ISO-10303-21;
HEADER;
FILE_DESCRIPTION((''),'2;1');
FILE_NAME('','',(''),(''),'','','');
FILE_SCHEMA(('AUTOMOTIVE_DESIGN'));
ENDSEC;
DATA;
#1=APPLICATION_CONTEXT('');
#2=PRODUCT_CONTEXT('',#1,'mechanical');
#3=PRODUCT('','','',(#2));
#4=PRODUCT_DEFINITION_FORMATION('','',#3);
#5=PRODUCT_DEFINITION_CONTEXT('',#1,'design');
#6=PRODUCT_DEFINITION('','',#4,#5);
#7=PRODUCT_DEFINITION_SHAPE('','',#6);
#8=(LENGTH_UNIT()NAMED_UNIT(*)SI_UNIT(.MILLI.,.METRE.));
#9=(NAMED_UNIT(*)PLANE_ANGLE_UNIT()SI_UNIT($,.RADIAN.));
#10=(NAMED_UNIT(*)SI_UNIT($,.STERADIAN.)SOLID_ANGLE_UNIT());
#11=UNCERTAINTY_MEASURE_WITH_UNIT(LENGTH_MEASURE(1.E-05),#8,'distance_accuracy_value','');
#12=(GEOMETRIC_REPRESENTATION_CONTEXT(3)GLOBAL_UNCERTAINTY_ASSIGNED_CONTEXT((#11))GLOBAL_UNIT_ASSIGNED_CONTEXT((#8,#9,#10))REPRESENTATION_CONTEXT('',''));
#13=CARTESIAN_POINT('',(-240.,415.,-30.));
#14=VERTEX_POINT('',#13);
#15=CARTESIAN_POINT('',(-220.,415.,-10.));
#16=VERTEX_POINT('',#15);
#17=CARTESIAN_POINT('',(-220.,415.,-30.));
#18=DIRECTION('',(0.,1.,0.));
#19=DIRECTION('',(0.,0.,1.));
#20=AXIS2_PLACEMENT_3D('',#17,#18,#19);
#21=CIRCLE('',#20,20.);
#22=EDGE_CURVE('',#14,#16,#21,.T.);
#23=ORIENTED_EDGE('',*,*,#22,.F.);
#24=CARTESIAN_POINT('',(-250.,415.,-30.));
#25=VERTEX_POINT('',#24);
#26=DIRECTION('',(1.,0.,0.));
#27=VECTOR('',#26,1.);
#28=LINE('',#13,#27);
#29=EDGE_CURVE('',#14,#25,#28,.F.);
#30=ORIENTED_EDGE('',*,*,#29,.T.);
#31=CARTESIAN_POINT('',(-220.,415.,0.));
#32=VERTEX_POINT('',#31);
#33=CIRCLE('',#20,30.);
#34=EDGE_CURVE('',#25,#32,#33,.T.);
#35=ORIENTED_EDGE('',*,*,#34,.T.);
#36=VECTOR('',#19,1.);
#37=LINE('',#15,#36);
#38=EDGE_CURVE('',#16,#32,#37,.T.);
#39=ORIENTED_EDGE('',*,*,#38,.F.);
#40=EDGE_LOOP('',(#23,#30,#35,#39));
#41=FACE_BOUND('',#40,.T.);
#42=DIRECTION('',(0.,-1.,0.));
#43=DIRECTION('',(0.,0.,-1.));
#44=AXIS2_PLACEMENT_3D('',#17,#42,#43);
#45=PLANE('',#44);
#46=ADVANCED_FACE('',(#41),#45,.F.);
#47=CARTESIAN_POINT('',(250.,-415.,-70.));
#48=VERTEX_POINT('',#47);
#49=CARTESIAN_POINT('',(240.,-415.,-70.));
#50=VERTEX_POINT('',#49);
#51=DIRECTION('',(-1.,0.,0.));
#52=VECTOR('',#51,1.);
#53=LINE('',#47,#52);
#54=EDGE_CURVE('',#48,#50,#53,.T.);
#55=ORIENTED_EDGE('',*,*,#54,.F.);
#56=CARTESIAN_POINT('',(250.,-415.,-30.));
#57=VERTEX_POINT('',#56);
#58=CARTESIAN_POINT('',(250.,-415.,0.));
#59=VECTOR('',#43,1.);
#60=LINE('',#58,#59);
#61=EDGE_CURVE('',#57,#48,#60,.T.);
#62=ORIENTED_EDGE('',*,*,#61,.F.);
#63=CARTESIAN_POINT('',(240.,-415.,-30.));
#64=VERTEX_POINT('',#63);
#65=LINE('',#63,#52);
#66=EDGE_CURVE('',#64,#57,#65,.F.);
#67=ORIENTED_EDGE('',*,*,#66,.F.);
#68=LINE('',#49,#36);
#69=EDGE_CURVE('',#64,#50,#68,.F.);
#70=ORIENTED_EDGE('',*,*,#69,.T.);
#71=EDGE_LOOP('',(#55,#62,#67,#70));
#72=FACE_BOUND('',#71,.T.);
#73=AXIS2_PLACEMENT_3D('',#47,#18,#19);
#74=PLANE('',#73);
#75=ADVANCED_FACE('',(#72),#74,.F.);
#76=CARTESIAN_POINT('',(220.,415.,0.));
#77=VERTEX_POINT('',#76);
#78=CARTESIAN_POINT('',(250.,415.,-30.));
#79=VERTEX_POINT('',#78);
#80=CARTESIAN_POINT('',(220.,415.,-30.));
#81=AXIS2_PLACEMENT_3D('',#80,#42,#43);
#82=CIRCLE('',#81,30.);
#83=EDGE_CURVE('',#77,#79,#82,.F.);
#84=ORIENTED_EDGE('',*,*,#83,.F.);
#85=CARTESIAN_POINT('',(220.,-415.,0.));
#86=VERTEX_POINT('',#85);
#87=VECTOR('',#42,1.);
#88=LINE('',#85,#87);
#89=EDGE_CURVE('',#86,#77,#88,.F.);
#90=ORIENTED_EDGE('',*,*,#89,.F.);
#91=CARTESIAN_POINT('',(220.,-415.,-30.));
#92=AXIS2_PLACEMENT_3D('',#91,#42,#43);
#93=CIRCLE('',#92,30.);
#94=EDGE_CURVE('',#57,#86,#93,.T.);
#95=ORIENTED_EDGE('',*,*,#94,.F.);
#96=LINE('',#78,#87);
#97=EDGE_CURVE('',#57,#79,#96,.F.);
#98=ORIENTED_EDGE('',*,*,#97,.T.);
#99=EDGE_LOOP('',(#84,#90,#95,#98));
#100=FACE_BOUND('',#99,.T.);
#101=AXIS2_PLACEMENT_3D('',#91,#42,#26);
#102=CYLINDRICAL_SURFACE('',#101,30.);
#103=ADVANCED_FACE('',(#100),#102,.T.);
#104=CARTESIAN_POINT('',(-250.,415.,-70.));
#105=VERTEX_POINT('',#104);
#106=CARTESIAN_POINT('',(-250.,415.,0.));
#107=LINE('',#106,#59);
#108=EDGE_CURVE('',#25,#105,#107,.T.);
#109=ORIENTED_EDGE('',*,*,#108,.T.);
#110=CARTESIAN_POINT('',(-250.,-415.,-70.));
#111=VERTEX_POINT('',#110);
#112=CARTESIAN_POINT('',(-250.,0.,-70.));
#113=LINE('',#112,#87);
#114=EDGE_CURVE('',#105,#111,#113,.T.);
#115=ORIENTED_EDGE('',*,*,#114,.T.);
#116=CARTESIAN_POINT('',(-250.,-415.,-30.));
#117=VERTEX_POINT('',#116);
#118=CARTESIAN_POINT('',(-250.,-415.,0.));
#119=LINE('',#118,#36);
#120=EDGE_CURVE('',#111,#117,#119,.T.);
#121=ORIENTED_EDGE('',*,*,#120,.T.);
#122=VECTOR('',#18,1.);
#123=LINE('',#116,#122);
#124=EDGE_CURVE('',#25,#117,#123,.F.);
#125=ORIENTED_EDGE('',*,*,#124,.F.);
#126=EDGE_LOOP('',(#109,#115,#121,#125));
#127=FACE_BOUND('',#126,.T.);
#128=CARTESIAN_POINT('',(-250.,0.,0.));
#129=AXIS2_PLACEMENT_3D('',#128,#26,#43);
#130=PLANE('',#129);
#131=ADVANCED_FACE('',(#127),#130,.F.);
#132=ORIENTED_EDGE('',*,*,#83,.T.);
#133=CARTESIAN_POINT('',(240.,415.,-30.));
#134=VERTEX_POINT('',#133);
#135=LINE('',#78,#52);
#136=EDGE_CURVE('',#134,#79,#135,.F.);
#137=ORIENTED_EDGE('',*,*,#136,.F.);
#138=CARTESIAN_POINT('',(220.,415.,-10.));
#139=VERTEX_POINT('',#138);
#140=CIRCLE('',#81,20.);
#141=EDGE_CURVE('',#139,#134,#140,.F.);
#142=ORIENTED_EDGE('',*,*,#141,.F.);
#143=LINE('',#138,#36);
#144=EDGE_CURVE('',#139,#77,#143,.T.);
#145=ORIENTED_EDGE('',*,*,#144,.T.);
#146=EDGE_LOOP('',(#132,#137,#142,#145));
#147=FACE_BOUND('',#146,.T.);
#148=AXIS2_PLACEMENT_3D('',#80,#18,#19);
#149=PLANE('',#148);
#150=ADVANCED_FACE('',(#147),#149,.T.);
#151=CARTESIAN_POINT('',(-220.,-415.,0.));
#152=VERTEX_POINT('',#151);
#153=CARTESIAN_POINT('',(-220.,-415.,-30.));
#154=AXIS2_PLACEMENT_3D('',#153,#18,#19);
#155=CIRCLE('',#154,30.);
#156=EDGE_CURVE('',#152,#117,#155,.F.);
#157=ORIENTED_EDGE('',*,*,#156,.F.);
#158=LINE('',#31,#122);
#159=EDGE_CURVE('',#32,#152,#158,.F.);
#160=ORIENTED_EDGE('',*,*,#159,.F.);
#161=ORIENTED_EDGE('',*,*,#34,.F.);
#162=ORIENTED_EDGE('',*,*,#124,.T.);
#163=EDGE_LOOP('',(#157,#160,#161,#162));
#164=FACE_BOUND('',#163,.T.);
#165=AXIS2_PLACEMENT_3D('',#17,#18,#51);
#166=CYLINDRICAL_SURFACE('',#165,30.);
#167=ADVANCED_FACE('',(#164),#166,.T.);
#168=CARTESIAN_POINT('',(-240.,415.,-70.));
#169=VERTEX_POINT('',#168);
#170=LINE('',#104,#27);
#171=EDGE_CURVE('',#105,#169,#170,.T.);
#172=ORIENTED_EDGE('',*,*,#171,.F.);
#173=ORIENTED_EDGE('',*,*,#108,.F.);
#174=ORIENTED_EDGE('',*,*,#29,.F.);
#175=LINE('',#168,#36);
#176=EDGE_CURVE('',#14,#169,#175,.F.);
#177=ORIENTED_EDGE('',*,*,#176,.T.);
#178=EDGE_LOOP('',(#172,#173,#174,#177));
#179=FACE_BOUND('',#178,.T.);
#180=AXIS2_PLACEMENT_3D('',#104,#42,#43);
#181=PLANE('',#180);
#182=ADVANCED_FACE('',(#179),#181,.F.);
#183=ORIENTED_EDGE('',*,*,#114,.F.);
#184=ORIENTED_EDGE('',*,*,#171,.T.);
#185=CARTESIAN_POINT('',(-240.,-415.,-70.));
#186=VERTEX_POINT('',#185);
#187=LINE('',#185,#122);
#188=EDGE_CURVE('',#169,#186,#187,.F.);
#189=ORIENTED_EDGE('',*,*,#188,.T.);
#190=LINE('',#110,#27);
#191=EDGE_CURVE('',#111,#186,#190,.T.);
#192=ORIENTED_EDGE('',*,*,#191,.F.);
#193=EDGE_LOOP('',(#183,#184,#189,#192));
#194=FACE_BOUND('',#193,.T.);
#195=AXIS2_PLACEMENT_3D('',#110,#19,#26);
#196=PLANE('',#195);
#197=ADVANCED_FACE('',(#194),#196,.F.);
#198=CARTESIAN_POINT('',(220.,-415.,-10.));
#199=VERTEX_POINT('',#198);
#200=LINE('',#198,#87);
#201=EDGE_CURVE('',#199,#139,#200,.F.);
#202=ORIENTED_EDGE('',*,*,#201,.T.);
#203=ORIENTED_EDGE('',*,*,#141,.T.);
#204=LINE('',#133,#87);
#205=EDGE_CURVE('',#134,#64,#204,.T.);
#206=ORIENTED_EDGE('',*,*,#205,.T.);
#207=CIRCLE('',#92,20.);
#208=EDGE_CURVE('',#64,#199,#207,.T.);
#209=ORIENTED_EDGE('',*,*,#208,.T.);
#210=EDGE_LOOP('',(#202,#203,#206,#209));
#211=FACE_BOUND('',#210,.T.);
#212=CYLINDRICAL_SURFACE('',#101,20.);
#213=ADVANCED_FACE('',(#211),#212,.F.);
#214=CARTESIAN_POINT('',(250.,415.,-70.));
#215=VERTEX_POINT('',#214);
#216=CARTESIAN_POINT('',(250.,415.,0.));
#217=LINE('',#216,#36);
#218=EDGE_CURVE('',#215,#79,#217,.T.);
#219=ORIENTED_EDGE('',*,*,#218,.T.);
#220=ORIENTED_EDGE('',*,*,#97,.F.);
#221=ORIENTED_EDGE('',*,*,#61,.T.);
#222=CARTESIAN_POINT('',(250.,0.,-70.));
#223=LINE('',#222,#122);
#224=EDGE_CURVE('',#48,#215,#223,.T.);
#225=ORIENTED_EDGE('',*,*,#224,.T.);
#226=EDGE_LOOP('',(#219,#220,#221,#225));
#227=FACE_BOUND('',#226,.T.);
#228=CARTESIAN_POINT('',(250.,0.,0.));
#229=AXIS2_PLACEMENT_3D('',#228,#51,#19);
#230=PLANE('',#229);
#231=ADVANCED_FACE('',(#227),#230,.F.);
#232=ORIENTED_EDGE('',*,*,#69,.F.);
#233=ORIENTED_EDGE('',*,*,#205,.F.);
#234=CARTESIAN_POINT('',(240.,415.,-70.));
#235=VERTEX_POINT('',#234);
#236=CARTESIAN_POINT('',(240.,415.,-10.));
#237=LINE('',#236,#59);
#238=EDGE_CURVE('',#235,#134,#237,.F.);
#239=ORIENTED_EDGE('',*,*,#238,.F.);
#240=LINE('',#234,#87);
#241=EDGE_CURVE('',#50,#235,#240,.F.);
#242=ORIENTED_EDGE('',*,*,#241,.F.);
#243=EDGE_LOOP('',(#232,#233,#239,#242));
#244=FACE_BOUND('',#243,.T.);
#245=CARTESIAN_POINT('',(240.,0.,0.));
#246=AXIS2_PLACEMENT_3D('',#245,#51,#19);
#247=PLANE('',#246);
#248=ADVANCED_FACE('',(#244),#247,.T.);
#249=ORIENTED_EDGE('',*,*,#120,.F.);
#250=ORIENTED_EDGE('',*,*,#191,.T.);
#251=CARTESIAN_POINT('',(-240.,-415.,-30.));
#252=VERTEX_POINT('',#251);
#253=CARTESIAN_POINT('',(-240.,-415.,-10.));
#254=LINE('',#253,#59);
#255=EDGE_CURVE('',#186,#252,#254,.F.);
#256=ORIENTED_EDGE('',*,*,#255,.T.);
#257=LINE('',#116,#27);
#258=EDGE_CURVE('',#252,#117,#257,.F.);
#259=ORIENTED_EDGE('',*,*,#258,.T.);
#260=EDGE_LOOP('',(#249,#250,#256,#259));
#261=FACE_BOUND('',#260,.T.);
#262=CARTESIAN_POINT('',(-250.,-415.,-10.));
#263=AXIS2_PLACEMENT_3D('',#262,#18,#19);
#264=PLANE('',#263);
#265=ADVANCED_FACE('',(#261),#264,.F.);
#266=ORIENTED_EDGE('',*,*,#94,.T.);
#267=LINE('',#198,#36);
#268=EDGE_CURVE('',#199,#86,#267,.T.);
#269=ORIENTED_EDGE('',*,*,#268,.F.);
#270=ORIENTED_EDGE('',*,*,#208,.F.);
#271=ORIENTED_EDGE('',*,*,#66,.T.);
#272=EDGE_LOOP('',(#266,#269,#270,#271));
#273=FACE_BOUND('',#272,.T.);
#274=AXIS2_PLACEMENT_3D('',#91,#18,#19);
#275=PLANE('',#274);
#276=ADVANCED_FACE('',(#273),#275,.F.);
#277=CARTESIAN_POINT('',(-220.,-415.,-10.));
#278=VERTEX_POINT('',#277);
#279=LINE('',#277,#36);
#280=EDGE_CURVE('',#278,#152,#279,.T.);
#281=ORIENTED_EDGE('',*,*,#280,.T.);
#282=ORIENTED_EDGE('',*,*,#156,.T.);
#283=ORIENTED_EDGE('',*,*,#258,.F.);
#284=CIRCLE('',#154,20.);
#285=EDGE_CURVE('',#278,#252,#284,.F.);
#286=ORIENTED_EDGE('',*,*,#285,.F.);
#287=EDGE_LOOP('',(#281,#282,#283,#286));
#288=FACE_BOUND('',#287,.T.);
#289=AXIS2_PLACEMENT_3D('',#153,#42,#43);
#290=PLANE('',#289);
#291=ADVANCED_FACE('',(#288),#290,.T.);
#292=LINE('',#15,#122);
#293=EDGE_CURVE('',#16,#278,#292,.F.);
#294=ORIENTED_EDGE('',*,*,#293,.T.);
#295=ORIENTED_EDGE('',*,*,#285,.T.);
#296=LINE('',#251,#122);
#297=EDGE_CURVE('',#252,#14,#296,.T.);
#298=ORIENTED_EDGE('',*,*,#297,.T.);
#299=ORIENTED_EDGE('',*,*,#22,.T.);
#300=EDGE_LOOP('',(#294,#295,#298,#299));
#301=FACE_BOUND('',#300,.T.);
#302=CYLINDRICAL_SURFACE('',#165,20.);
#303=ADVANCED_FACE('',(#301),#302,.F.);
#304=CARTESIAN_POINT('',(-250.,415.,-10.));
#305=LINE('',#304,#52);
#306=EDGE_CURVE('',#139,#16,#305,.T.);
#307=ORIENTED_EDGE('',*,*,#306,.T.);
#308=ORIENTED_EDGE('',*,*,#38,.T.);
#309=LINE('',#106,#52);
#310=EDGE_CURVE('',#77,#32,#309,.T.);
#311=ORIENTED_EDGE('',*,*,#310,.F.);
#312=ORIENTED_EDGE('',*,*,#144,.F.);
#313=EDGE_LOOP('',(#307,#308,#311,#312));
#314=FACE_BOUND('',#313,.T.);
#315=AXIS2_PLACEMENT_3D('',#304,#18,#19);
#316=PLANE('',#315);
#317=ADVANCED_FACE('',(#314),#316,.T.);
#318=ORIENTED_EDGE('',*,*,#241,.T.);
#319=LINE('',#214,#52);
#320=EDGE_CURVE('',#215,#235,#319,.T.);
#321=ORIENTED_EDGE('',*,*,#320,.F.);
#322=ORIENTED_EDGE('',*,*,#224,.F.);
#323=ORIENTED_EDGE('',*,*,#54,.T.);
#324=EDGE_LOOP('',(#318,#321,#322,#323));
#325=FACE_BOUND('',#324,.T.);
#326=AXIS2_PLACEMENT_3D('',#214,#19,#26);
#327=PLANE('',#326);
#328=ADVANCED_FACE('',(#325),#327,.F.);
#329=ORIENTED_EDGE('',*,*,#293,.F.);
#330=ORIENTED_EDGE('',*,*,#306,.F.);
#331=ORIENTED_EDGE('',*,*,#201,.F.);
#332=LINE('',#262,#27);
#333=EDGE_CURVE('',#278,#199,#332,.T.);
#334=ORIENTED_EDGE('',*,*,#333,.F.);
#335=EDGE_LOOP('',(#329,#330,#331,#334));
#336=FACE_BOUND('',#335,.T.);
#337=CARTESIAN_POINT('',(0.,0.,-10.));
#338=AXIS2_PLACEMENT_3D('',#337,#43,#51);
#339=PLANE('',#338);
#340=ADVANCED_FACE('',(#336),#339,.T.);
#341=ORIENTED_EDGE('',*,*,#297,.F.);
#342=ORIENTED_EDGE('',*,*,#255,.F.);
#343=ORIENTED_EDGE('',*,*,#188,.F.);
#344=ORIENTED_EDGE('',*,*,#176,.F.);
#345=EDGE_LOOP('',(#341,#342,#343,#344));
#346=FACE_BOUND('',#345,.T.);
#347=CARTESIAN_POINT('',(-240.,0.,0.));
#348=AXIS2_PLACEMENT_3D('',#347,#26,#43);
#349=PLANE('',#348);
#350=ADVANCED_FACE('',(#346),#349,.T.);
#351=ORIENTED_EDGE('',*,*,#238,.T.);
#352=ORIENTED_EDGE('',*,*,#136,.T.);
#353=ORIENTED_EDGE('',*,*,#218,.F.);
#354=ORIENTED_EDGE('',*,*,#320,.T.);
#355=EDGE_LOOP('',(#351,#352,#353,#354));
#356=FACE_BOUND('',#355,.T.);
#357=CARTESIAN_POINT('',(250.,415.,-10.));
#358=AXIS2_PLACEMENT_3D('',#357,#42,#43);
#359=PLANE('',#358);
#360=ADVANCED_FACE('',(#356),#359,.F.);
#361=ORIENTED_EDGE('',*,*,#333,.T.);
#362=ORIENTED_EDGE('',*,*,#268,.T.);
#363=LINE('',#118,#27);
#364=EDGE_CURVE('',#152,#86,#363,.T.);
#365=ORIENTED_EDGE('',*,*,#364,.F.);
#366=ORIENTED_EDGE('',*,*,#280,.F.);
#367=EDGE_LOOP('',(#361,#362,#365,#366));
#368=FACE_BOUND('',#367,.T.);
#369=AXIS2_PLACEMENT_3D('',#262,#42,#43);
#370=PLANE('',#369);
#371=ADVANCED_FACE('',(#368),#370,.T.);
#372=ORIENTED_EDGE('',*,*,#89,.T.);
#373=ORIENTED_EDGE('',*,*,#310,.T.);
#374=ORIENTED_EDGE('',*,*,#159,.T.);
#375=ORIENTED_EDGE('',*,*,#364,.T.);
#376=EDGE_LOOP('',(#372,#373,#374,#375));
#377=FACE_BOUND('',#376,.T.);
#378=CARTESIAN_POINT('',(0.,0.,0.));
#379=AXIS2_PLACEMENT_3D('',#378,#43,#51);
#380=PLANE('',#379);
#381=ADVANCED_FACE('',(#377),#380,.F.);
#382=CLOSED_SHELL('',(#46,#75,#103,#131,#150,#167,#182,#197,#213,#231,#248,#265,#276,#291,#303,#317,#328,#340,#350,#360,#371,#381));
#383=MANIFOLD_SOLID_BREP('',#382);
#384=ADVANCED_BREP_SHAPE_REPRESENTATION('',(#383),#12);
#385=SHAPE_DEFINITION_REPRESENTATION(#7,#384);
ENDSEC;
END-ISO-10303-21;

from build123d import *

# Parameters (mm, degrees)
SKETCH1_W                      = 500
SKETCH1_H                      = 830
BASE_FLANGE1_DEPTH             = 10
EDGE_FLANGE1_STRIP_W           = 80
EDGE_FLANGE1_STRIP_H           = 10
EDGE_FLANGE1_STRIP_CUT_DEPTH   = 830
EDGE_FLANGE1_STRIP_2_W         = 80
EDGE_FLANGE1_STRIP_2_H         = 10
EDGE_FLANGE1_STRIP_CUT_2_DEPTH = 830
EDGE_FLANGE1_DEPTH             = 830
EDGE_FLANGE1_BEND_DEPTH        = 830


# Sheet-metal steps are written as plain solids
with BuildPart() as part:
    # Sketch1 → Base-Flange1 (new body)
    with BuildSketch(Plane.XY):
        Rectangle(SKETCH1_W, SKETCH1_H)
    extrude(amount=-BASE_FLANGE1_DEPTH)

    # Edge-Flange1 strip (across the edge) → Edge-Flange1 strip cut (cut)
    with BuildSketch(Plane(origin=(-250, -415, -10), x_dir=(1, 0, 0), z_dir=(0, 1, 0))):
        with Locations((-10, -5)):
            Rectangle(EDGE_FLANGE1_STRIP_W, EDGE_FLANGE1_STRIP_H)
    extrude(amount=EDGE_FLANGE1_STRIP_CUT_DEPTH, mode=Mode.SUBTRACT)

    # Edge-Flange1 strip 2 (across the edge) → Edge-Flange1 strip cut 2 (cut)
    with BuildSketch(Plane(origin=(250, 415, -10), x_dir=(-1, 0, 0), z_dir=(0, -1, 0))):
        with Locations((-10, -5)):
            Rectangle(EDGE_FLANGE1_STRIP_2_W, EDGE_FLANGE1_STRIP_2_H)
    extrude(amount=EDGE_FLANGE1_STRIP_CUT_2_DEPTH, mode=Mode.SUBTRACT)

    # Edge-Flange1 section (across the edge) → Edge-Flange1 (add)
    with BuildSketch(Plane(origin=(-250, -415, -10), x_dir=(1, 0, 0), z_dir=(0, 1, 0))):
        with BuildLine():
            Line((0, 20), (0, 60))
            Line((0, 60), (10, 60))
            Line((10, 60), (10, 20))
            ThreePointArc((10, 20), (15.857864376, 5.857864376), (30, 0))
            Line((30, 0), (30, -10))
            ThreePointArc((30, -10), (8.786796564, -1.213203436), (0, 20))
        make_face()
    extrude(amount=EDGE_FLANGE1_DEPTH)

    # Edge-Flange1 section 2 (across the edge) → Edge-Flange1 bend (add)
    with BuildSketch(Plane(origin=(250, 415, -10), x_dir=(-1, 0, 0), z_dir=(0, -1, 0))):
        with BuildLine():
            Line((0, 20), (0, 60))
            Line((0, 60), (10, 60))
            Line((10, 60), (10, 20))
            ThreePointArc((10, 20), (15.857864376, 5.857864376), (30, 0))
            Line((30, 0), (30, -10))
            ThreePointArc((30, -10), (8.786796564, -1.213203436), (0, 20))
        make_face()
    extrude(amount=EDGE_FLANGE1_BEND_DEPTH)


solid = part.part
